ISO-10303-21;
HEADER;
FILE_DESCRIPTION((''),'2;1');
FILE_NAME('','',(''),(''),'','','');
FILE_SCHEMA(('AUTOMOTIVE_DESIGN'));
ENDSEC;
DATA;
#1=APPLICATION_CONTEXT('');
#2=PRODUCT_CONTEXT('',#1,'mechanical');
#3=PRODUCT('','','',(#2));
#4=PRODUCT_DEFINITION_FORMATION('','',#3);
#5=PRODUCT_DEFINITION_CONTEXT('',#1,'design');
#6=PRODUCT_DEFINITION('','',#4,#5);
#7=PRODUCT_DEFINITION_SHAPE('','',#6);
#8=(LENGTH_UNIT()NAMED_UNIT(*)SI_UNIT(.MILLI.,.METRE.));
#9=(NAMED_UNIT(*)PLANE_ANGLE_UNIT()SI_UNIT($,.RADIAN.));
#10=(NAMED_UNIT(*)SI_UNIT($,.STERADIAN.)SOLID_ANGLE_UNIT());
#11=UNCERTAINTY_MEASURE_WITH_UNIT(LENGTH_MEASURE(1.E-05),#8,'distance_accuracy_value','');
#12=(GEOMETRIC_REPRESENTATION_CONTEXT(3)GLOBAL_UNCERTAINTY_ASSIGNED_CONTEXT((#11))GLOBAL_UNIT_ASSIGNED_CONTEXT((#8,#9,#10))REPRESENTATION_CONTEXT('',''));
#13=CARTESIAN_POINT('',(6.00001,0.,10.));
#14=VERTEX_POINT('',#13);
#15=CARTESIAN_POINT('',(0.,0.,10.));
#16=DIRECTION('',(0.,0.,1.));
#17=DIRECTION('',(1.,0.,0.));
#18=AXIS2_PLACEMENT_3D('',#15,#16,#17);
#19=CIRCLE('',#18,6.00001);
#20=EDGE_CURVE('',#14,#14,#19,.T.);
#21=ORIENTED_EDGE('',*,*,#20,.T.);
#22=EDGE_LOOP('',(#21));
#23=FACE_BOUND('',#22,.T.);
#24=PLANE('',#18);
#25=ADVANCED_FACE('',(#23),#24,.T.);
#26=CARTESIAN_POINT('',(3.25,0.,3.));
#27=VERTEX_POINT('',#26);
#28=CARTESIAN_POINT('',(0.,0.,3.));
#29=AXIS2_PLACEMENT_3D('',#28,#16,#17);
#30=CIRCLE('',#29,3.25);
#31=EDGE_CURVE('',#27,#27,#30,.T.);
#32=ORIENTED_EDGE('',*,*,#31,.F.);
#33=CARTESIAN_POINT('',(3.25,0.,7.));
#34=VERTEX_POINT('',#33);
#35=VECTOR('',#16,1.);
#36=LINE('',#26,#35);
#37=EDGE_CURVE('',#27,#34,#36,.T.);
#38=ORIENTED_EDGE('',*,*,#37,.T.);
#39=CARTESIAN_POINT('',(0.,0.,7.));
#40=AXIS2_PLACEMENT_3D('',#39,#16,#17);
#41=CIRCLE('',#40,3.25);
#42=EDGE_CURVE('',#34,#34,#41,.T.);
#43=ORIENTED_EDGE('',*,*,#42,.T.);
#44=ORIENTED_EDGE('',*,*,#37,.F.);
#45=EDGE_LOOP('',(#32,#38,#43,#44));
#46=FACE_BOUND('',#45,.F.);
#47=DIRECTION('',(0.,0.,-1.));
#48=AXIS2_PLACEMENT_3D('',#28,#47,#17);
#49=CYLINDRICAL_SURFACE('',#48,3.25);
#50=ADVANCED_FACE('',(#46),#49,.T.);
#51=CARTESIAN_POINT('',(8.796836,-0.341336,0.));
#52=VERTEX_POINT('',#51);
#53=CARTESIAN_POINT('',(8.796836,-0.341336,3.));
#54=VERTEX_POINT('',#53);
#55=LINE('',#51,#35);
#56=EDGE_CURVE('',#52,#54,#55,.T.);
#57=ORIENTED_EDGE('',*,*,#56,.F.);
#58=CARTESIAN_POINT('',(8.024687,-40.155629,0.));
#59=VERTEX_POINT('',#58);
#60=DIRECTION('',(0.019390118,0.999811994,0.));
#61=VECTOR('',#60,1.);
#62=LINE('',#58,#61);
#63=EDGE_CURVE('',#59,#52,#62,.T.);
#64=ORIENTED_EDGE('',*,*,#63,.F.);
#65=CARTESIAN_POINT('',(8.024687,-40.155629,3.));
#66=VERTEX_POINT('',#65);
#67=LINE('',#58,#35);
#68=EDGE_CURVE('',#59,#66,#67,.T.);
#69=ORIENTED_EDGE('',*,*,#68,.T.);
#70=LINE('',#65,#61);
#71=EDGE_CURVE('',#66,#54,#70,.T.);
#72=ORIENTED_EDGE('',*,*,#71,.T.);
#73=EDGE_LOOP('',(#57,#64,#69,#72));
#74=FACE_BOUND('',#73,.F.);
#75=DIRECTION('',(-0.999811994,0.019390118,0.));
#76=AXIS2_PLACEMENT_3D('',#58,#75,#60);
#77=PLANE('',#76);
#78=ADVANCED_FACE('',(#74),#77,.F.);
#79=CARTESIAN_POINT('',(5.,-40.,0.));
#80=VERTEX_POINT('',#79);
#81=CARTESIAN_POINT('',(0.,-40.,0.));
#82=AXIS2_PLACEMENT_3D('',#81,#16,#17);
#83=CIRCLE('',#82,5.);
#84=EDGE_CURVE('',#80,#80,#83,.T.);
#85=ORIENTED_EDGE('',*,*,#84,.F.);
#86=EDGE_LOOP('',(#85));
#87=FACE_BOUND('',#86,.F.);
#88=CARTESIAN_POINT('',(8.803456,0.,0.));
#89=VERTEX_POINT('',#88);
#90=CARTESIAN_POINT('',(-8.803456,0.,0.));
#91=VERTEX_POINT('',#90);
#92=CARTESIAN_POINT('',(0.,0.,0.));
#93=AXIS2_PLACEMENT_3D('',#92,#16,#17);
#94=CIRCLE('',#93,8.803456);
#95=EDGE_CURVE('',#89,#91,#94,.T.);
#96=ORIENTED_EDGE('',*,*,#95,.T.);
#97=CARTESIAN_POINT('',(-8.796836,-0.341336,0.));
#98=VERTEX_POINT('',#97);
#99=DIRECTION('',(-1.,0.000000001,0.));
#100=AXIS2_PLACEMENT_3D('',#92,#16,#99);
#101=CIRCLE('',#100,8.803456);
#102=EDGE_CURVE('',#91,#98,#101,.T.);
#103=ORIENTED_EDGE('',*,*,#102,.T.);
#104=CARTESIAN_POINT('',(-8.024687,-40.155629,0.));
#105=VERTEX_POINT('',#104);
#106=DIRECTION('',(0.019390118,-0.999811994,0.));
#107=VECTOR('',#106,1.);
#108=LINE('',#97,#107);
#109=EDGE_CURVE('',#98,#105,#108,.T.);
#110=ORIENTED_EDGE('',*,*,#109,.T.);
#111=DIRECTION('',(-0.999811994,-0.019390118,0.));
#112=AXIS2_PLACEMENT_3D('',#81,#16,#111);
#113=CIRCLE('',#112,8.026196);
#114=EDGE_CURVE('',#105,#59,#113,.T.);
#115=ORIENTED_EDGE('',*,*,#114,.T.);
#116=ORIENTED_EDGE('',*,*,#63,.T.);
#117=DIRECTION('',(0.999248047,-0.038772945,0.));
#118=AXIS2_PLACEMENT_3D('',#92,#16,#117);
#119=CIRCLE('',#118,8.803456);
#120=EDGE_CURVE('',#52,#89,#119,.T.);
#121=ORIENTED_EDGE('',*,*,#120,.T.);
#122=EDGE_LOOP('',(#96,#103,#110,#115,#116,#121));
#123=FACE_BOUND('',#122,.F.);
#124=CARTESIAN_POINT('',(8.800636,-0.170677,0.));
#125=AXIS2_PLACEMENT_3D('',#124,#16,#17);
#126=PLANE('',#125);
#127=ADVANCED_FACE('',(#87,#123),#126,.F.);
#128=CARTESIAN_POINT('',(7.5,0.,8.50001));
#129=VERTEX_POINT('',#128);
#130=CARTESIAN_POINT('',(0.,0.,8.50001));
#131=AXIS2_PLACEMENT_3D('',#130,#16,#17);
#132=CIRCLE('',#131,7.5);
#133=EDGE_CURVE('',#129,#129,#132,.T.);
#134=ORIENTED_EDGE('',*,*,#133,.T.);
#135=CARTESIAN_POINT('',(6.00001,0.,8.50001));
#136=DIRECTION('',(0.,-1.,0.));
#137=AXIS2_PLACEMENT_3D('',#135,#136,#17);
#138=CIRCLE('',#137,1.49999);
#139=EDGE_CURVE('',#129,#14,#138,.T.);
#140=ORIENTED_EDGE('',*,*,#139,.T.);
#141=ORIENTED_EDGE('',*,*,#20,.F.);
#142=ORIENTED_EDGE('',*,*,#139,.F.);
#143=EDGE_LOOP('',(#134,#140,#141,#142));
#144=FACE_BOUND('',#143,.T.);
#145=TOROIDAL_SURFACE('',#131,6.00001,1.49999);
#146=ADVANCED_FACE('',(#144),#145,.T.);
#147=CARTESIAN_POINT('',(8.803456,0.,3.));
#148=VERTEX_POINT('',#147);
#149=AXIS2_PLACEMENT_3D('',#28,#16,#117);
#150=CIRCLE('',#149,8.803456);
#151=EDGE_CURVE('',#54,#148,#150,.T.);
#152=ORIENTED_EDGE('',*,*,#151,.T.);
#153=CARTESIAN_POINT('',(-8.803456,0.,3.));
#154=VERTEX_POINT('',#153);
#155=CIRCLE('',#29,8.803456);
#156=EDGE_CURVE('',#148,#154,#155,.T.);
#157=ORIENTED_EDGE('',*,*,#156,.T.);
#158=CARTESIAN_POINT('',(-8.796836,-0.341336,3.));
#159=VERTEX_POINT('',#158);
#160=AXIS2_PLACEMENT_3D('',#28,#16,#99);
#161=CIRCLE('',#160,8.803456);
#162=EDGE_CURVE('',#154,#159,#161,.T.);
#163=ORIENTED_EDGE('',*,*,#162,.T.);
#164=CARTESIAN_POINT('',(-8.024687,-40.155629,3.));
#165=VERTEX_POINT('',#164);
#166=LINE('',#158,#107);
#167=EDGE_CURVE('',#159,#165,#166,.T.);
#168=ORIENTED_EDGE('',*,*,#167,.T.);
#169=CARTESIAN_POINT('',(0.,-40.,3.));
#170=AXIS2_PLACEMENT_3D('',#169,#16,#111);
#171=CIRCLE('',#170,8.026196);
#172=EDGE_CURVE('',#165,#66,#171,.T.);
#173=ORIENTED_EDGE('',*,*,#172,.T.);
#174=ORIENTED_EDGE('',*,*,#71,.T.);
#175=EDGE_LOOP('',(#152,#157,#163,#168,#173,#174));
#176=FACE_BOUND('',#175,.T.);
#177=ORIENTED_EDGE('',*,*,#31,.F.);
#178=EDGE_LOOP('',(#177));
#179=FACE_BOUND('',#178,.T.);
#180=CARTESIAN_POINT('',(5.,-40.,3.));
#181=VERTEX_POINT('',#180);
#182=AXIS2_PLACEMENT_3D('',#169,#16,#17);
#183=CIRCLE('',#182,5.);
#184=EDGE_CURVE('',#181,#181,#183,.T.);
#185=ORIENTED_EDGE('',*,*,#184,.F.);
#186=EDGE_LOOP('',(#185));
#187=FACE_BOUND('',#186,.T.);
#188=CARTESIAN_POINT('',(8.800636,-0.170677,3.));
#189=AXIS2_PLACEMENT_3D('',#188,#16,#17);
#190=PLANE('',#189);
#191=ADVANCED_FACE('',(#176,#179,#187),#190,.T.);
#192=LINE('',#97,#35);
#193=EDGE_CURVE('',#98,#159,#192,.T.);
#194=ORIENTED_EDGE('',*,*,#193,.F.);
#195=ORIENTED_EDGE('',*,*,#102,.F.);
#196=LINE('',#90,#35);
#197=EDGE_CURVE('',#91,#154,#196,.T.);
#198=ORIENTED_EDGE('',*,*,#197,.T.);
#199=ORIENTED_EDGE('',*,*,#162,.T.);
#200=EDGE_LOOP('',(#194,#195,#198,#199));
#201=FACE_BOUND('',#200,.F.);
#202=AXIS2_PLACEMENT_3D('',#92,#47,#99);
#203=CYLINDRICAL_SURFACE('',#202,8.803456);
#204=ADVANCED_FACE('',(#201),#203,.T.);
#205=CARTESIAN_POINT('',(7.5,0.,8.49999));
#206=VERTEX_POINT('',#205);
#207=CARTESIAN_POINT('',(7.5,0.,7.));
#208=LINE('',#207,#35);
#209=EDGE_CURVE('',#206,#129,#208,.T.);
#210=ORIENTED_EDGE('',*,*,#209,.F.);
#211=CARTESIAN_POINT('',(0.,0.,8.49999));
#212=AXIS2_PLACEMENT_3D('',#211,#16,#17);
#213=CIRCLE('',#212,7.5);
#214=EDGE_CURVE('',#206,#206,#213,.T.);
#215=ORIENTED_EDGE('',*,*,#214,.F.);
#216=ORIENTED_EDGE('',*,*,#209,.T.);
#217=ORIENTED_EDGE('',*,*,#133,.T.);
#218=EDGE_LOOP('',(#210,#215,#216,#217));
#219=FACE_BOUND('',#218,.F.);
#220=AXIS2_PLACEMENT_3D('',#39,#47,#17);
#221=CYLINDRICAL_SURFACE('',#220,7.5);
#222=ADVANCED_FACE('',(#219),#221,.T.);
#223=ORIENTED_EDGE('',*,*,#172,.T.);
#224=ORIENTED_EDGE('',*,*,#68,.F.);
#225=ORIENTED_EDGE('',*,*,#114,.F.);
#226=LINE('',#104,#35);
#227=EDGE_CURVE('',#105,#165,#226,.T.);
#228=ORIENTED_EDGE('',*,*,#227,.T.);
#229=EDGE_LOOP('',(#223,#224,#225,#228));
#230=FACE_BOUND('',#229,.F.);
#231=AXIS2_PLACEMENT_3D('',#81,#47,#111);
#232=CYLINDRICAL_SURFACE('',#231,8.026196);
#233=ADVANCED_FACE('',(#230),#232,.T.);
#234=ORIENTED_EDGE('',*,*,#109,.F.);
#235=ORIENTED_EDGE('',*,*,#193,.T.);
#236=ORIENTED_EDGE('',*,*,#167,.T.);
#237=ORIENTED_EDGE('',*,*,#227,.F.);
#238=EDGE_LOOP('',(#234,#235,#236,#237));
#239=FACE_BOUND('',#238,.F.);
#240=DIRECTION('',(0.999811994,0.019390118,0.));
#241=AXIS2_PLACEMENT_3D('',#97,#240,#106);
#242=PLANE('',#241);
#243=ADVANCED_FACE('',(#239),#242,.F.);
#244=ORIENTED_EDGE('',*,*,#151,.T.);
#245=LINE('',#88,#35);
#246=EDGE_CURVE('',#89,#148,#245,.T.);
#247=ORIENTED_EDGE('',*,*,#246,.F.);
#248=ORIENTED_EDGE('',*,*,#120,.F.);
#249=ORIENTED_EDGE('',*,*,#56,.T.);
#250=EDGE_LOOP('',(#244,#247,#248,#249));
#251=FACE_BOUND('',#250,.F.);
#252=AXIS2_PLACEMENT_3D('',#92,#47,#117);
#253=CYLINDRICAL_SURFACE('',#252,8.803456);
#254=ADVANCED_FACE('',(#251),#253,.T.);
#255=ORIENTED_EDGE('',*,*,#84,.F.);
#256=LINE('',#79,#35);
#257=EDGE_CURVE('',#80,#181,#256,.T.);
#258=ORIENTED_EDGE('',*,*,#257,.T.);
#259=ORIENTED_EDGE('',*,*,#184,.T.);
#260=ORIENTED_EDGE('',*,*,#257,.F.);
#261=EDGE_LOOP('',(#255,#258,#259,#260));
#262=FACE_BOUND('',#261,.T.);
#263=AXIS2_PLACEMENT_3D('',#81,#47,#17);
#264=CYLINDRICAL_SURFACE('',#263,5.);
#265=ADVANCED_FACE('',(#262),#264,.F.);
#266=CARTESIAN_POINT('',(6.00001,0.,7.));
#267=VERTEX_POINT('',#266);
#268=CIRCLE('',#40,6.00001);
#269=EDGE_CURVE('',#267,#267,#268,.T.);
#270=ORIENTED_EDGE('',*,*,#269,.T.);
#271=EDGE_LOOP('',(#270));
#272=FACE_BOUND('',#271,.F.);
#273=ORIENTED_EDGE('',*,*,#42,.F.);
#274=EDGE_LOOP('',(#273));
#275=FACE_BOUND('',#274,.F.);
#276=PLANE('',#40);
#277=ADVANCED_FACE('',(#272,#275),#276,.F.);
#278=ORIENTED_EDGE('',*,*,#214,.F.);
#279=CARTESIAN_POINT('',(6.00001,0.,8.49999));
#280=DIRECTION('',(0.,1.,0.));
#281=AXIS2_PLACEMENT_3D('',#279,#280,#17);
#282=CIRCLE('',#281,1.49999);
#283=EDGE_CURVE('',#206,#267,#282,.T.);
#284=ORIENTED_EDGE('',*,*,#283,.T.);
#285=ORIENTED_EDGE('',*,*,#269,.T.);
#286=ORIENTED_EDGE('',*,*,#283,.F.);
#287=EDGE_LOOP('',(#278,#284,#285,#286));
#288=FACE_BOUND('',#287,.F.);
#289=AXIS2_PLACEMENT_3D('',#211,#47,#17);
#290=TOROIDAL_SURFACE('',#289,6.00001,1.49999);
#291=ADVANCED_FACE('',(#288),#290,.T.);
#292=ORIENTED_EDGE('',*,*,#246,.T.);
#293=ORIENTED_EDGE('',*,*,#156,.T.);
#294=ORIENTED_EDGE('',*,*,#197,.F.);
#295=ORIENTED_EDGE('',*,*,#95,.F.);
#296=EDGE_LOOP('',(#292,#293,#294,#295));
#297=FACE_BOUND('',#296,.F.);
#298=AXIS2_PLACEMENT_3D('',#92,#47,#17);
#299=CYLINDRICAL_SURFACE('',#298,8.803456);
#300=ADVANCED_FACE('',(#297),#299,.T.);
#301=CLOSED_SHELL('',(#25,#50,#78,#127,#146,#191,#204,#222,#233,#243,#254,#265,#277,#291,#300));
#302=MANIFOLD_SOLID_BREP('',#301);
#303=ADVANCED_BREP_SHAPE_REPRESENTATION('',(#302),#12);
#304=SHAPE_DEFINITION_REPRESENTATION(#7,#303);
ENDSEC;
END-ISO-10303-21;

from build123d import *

# Parameters (mm, degrees)
F0_R     = 5
F1_DEPTH = 3
F2_R     = 3.25
F3_DEPTH = 4
F4_R     = 7.5
F5_DEPTH = 3
F6_R     = 1.49999


# Not quite as in the source:
# - a fillet or chamfer is up to 0.001 mm smaller than in the source, because OpenCascade refuses the exact size


with BuildPart() as f1:
    # F0 (on Top) → F1 (new body)
    with BuildSketch(Plane.XY):
        with BuildLine():
            Line((8.8034559258, 0), (8.7968361379, -0.3413359058))
            ThreePointArc((8.7968361379, -0.3413359058), (8.8018008233, -0.1707000455), (8.8034559258, 0))
        make_face()
        with BuildLine():
            Line((8.024687147, -40.1556288865), (8.7968361379, -0.3413359058))
            Line((8.7968361379, -0.3413359058), (8.8034559258, 0))
            ThreePointArc((8.8034559258, 0), (0, 8.8034559258), (-8.8034559258, 0))
            Line((-8.8034559258, 0), (-8.7968361379, -0.3413359058))
            Line((-8.7968361379, -0.3413359058), (-8.024687147, -40.1556288865))
            ThreePointArc((-8.024687147, -40.1556288865), (0, -48.02619612), (8.024687147, -40.1556288865))
        make_face()
        with Locations((0, -40)):
            Circle(F0_R, mode=Mode.SUBTRACT)
        with BuildLine():
            Line((-8.7968361379, -0.3413359058), (-8.8034559258, 0))
            ThreePointArc((-8.8034559258, 0), (-8.8018008233, -0.1707000455), (-8.7968361379, -0.3413359058))
        make_face()
    extrude(amount=F1_DEPTH)

    # F2 (on face) → F3 (join)
    with BuildSketch(Plane.XY.offset(3)):
        Circle(F2_R)
    extrude(amount=F3_DEPTH)

    # F4 (on face) → F5 (join)
    with BuildSketch(Plane.XY.offset(7)):
        Circle(F4_R)
    extrude(amount=F5_DEPTH)

    # F6 (radius 1.5 in the source; OpenCascade refuses exactly that, so slightly less here)
    f6_edges = [f1.edges().sort_by_distance(p)[0] for p in [
        (-7.5, 0, 10),
        (-7.5, 0, 7),
    ]]
    fillet(f6_edges, radius=F6_R)


solid = f1.part
